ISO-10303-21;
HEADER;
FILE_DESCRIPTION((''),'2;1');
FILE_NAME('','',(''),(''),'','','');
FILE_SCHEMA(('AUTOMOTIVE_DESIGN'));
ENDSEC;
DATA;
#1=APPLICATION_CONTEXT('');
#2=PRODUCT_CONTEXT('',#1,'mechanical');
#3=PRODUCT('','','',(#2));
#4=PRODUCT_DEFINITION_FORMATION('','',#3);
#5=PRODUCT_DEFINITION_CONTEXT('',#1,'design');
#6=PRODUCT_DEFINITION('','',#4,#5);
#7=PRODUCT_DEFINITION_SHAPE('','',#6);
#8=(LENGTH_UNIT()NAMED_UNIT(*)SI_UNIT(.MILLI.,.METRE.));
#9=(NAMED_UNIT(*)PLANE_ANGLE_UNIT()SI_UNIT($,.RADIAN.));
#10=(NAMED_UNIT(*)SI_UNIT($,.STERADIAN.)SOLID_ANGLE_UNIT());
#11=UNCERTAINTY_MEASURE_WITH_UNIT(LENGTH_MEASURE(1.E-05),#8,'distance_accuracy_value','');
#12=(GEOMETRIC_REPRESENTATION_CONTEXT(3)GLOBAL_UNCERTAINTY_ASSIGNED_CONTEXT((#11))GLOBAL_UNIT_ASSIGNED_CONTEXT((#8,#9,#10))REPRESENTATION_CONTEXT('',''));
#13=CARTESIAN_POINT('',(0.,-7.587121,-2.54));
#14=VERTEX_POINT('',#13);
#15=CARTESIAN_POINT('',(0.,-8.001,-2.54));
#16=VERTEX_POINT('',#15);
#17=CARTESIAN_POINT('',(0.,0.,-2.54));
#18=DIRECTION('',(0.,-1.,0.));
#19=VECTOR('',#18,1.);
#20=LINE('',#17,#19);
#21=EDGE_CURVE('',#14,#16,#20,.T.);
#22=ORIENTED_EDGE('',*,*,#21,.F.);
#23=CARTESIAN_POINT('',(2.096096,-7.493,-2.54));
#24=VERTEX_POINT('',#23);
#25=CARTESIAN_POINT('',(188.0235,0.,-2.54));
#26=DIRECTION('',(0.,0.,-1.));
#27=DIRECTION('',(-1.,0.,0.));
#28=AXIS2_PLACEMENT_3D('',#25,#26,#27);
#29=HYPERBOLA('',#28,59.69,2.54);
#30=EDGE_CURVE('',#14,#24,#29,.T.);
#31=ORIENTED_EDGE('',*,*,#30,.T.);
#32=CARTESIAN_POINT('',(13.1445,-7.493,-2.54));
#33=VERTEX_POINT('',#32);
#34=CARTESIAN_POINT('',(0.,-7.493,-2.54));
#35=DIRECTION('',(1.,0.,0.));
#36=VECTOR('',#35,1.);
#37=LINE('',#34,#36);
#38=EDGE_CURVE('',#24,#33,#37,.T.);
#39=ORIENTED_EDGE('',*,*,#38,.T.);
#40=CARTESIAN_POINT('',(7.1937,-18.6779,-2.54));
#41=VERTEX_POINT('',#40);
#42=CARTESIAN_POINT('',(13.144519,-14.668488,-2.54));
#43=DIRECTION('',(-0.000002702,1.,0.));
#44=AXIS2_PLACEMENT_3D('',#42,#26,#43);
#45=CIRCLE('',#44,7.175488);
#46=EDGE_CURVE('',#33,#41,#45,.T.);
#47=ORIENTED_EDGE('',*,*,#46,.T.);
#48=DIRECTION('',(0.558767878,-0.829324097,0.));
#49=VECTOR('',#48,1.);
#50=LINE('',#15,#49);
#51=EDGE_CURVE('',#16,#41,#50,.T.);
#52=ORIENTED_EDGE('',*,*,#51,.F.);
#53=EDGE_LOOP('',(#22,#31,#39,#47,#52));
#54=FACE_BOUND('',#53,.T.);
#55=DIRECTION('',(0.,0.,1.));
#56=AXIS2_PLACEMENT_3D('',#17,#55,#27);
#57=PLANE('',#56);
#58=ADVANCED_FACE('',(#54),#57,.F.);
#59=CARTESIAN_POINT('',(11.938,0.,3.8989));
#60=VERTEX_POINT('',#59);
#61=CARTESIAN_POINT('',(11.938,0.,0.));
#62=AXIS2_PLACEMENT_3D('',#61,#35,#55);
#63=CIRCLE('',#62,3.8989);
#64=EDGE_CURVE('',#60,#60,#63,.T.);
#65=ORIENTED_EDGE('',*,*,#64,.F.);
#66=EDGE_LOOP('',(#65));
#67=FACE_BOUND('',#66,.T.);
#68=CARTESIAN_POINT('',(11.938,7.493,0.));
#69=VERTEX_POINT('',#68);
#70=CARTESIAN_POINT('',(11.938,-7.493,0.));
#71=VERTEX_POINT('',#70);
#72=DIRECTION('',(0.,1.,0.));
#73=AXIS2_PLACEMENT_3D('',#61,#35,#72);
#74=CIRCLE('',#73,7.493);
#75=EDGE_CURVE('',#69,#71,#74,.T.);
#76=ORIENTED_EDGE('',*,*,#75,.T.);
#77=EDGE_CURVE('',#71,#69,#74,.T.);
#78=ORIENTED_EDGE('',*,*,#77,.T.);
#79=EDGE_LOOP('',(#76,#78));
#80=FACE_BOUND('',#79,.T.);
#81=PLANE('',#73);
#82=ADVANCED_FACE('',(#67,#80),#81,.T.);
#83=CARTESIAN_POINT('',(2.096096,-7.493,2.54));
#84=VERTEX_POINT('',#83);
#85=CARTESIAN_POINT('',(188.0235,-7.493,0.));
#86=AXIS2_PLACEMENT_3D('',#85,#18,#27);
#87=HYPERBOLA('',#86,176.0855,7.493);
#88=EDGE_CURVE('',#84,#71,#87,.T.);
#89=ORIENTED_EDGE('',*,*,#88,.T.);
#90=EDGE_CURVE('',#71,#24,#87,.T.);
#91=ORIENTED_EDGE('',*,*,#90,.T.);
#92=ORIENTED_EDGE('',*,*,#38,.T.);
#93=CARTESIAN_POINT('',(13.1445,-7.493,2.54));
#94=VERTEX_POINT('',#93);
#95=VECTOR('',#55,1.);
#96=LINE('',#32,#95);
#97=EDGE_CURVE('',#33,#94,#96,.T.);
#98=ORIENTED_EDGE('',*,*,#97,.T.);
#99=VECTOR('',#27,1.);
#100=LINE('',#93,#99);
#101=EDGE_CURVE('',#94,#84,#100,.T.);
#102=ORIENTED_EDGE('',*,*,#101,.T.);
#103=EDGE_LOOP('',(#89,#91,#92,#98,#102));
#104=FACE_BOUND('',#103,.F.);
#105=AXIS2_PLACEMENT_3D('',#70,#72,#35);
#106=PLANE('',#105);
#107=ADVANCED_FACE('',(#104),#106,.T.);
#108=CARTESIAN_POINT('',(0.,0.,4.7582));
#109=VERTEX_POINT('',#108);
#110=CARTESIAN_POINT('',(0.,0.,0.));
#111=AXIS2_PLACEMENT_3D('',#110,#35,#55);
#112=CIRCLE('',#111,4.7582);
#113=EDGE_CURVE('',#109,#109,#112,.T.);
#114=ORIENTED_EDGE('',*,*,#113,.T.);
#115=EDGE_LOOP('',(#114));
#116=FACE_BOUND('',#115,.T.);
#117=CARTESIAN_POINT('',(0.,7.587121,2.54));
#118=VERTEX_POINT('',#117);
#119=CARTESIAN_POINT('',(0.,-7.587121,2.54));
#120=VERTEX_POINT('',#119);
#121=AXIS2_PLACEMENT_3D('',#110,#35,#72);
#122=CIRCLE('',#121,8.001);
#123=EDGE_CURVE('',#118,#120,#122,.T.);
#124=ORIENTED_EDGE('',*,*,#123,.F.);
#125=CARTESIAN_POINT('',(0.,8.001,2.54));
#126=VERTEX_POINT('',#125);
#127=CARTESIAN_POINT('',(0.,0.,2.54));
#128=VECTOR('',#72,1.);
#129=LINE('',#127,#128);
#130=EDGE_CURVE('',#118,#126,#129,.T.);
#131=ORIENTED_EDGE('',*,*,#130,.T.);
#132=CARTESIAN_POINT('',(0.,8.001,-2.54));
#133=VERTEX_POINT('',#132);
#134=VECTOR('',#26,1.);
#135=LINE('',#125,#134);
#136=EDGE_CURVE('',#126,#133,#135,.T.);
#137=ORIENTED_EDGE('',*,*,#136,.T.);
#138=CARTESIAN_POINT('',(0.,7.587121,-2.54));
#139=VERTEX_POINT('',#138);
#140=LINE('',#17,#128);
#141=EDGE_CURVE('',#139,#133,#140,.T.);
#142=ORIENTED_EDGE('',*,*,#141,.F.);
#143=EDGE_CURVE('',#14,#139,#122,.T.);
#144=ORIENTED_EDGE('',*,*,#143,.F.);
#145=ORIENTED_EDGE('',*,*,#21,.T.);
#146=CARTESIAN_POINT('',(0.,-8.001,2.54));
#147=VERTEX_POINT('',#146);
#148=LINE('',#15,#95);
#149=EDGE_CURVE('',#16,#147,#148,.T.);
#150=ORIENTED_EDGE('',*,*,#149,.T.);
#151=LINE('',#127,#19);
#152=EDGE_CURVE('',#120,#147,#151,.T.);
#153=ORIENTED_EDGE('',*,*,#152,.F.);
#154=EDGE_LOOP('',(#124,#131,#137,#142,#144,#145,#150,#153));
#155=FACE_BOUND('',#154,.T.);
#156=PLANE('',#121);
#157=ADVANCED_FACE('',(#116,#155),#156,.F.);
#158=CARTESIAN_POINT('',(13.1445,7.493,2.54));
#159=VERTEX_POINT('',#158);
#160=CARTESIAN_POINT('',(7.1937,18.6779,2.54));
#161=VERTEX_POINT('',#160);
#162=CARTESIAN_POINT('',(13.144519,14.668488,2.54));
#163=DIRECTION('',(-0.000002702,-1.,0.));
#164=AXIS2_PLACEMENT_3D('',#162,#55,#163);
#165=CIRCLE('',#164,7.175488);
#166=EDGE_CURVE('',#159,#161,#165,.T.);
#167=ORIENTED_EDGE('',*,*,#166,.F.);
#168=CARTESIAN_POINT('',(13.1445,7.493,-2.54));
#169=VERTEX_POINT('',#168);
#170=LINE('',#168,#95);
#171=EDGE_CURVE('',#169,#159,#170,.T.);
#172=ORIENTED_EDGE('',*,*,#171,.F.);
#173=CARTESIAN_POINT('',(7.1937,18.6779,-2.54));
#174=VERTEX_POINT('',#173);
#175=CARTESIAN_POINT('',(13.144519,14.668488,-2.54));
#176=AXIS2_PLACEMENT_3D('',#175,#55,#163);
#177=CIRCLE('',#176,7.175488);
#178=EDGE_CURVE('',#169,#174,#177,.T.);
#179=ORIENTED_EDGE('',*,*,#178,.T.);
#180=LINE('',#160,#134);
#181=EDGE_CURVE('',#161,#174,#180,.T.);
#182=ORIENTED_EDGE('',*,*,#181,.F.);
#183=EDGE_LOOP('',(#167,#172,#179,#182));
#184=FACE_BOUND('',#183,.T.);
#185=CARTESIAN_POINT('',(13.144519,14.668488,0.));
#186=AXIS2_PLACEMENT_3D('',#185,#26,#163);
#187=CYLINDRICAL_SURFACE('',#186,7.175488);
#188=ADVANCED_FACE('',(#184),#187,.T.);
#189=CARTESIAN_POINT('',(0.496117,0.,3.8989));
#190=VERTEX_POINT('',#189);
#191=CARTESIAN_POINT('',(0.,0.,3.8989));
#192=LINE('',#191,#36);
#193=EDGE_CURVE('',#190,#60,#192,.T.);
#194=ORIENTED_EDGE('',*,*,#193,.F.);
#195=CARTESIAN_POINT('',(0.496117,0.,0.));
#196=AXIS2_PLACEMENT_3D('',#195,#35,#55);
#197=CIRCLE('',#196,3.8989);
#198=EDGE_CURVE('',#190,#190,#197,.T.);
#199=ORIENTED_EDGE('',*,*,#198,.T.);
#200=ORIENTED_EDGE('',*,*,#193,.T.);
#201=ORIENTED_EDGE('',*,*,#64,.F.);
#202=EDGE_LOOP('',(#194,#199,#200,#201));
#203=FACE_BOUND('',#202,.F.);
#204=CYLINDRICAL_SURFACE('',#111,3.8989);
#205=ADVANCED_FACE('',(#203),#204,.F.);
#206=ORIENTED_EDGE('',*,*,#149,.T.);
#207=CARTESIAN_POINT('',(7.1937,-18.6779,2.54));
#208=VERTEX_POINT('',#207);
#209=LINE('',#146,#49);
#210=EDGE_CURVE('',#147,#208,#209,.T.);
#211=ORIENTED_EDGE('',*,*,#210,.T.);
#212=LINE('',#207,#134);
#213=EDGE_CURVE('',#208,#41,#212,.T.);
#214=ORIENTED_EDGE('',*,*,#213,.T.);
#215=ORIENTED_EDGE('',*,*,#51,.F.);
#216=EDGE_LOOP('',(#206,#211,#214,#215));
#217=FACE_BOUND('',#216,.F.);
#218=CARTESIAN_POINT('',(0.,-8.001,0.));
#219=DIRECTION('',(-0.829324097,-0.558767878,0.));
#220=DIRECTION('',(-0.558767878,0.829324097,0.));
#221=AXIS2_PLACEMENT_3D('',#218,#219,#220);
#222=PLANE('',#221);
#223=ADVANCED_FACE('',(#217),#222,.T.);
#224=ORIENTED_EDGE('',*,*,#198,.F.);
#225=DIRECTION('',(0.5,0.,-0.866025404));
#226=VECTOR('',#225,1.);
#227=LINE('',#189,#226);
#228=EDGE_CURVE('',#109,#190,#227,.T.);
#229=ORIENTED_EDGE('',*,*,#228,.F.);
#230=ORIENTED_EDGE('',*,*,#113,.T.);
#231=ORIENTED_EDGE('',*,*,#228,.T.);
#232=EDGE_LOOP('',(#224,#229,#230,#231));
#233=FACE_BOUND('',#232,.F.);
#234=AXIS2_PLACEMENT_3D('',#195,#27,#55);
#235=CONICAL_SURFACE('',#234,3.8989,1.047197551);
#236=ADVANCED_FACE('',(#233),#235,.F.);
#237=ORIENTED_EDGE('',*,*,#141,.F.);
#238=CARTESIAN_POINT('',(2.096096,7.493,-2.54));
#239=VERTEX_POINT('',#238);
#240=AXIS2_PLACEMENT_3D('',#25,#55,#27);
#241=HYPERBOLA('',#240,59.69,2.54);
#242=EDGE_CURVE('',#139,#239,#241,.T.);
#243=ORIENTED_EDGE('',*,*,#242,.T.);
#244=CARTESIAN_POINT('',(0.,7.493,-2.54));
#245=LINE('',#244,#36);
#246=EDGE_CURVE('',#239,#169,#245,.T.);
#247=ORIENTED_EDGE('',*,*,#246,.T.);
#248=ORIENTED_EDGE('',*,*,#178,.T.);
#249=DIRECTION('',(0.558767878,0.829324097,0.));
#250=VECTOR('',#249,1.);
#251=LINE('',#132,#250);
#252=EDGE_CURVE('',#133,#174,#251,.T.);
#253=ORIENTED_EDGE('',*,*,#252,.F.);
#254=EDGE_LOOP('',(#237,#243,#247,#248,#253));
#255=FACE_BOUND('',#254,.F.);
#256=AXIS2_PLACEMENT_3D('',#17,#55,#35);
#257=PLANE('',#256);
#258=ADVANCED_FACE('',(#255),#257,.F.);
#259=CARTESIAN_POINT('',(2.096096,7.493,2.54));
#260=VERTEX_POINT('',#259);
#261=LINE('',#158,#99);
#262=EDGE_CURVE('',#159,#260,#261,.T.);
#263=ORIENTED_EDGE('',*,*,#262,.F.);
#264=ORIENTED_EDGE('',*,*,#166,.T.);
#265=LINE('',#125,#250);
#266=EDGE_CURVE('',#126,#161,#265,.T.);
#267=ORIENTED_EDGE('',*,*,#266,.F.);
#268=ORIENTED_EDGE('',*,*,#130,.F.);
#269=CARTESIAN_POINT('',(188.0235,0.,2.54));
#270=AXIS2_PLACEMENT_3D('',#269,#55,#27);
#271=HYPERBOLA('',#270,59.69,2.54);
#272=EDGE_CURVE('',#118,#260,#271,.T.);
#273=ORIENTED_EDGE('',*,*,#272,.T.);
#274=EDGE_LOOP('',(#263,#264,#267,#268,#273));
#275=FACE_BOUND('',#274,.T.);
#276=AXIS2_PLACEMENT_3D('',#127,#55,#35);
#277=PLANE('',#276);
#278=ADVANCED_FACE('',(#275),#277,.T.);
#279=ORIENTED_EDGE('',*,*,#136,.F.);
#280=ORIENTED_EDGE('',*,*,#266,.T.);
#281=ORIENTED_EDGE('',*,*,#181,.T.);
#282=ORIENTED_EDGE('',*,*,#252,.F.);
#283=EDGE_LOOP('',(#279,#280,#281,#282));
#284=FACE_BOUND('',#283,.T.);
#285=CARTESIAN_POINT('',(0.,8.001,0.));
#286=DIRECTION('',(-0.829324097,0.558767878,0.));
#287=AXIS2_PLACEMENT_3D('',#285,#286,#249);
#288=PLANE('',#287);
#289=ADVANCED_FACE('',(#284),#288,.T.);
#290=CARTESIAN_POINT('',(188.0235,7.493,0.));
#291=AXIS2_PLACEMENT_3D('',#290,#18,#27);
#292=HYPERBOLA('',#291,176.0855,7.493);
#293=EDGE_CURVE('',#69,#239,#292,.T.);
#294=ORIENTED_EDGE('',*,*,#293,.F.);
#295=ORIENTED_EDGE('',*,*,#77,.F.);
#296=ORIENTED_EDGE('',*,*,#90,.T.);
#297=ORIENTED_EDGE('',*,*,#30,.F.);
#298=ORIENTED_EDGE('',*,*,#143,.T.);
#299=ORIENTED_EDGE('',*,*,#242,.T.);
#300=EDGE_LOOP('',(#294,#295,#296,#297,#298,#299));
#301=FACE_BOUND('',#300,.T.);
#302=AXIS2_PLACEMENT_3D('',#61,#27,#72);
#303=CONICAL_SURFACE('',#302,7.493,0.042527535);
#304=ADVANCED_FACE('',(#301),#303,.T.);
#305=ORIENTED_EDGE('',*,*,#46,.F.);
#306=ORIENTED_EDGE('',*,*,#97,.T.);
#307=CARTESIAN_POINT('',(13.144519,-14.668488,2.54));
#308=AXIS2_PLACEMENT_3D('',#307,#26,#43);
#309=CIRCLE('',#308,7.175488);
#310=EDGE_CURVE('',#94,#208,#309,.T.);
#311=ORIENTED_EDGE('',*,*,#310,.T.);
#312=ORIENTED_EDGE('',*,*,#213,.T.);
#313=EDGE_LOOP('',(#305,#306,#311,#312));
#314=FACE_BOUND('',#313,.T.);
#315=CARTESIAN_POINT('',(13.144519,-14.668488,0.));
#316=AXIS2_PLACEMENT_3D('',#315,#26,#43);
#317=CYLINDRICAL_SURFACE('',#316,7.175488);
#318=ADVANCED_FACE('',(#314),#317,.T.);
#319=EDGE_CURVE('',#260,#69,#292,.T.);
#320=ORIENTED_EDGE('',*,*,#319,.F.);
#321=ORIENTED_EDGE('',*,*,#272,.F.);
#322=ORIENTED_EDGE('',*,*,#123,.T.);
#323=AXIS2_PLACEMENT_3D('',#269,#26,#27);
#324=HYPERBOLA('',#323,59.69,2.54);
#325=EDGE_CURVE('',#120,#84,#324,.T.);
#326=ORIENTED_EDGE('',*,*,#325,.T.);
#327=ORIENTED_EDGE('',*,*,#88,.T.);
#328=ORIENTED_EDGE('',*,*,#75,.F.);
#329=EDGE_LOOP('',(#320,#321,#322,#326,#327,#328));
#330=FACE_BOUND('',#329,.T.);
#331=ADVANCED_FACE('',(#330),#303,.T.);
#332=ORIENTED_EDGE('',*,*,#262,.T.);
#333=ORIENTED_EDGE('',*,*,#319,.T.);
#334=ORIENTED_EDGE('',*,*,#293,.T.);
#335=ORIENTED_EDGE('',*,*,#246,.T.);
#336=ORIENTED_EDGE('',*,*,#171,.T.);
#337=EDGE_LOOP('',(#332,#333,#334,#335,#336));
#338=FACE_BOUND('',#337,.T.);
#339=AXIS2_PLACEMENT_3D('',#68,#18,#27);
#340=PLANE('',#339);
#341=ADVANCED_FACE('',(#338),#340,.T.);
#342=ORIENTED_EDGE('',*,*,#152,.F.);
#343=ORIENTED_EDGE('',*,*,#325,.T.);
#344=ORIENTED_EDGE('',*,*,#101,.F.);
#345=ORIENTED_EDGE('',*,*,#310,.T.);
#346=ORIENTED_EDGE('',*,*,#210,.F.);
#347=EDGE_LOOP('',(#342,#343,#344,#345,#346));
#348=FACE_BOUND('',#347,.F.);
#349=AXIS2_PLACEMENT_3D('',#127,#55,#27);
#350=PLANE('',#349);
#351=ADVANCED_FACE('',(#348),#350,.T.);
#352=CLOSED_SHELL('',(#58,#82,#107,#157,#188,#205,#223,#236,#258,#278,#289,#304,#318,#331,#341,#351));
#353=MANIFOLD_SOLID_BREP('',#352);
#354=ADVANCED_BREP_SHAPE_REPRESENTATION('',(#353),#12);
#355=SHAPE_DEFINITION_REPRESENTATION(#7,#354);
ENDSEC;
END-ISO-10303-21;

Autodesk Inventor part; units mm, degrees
ref_plane "YZ Plane" through (0, 0, 0) normal (1, 0, 0) x (0, 1, 0)
ref_plane "XZ Plane" through (0, 0, 0) normal (0, 1, 0) x (-1, 0, 0)
sketch "Sketch1" plane through (0, 0, 0) normal (0, 0, 1) x (1, 0, 0)
  line L0 (0, 0) -> (11.938, 0)
  line L1 (0, 0) -> (0, 8.001)
  line L2 (11.938, 7.493) -> (11.938, 0)
  line L3 (0, 8.001) -> (7.1937, 18.6779)
  line L4 (11.938, 7.493) -> (13.1445, 7.493)
  arc A0 (13.1445, 7.493) -> (7.1937, 18.6779) centre (13.1445, 14.6685) ccw
  line L5 (11.938, 7.493) -> (0, 8.001)
  line L6 (11.938, 7.493) -> (0, 7.493)
  dimension "d0" = 14.986
  dimension "d1" = 13.1445
  dimension "d2" = 14.6685
  dimension "d3" = 7.1755
  dimension "d4" = 11.938
  dimension "d5" = 16.002
revolve "Body" add sketch "Sketch1" angle 360 about axis through (0, 0, 0) along (1, 0, 0) contours L1 L6 L2 L0 | L1 L5 L6
extrude "Wing1" add sketch "Sketch1" along normal mid plane 5.08 contours L1 L5 L6 | L5 L3 A0 L4
fillet "Fillet1" [suppressed]
mirror "Wing2" about plane through (0, 0, 0) normal (0, 1, 0) of "Wing1"
sketch "Sketch2" plane through (0, 0, 0) normal (1, 0, 0) x (0, 1, 0)
  line L0 (0, -14) -> (0, 14) projected
  line L1 (-14, 0) -> (14, 0) projected
  point P0 (0, 0)
hole "Thread" at (0, 0, 0) direction (1, 0, 0) diameter 7.7978 end through all thread size "3/8-16 UNC" class "2B" standard "ANSI Unified Screw Threads"
chamfer "Chamfer1" distance 0.8593 angle 30 1 edges at (0, 0, -3.8989) measured on face at (0, 6.3482, -0.1567)
ref_plane "Work Plane1" through (50.7701, 0, 0) normal (0, 0, -1) x (1, 0, 0)
equation "\"d0\" = KOD2"
equation "\"d1\" = KOH1 - RR"
equation "\"d2\" = 0.5 * E0 - RR"
equation "\"d3\" = RR"
equation "\"d4\" = KOH"
equation "\"d5\" = KOD"
equation "\"d6\" = SW"
equation "\"d8\" = 0.333333 * SW"
equation "\"d9\" = -0.5 * GD1 + 0.5 * NND"
equation "\"d109\" = -0.5 * GD1 + 0.5 * NND"
equation "\"NND\" = 9.525"
equation "\"KOH\" = 11.938"
equation "\"KOH1\" = 20.32"
equation "\"SW\" = 5.08"
equation "\"KOD\" = 16.002"
equation "\"KOD2\" = 14.986"
equation "\"RR\" = 7.1755"
equation "\"E0\" = 43.688"
equation "\"THREADDIA\" = 9.525"
equation "\"TOA\" = 30deg"
equation "\"RR2\" = 2.8702"
equation "\"SW1\" = SW"
equation "\"GD1\" = 7.806481"
properties part number "ANSI B18.17 - 3/8 - 16" material "Steel, Mild"
